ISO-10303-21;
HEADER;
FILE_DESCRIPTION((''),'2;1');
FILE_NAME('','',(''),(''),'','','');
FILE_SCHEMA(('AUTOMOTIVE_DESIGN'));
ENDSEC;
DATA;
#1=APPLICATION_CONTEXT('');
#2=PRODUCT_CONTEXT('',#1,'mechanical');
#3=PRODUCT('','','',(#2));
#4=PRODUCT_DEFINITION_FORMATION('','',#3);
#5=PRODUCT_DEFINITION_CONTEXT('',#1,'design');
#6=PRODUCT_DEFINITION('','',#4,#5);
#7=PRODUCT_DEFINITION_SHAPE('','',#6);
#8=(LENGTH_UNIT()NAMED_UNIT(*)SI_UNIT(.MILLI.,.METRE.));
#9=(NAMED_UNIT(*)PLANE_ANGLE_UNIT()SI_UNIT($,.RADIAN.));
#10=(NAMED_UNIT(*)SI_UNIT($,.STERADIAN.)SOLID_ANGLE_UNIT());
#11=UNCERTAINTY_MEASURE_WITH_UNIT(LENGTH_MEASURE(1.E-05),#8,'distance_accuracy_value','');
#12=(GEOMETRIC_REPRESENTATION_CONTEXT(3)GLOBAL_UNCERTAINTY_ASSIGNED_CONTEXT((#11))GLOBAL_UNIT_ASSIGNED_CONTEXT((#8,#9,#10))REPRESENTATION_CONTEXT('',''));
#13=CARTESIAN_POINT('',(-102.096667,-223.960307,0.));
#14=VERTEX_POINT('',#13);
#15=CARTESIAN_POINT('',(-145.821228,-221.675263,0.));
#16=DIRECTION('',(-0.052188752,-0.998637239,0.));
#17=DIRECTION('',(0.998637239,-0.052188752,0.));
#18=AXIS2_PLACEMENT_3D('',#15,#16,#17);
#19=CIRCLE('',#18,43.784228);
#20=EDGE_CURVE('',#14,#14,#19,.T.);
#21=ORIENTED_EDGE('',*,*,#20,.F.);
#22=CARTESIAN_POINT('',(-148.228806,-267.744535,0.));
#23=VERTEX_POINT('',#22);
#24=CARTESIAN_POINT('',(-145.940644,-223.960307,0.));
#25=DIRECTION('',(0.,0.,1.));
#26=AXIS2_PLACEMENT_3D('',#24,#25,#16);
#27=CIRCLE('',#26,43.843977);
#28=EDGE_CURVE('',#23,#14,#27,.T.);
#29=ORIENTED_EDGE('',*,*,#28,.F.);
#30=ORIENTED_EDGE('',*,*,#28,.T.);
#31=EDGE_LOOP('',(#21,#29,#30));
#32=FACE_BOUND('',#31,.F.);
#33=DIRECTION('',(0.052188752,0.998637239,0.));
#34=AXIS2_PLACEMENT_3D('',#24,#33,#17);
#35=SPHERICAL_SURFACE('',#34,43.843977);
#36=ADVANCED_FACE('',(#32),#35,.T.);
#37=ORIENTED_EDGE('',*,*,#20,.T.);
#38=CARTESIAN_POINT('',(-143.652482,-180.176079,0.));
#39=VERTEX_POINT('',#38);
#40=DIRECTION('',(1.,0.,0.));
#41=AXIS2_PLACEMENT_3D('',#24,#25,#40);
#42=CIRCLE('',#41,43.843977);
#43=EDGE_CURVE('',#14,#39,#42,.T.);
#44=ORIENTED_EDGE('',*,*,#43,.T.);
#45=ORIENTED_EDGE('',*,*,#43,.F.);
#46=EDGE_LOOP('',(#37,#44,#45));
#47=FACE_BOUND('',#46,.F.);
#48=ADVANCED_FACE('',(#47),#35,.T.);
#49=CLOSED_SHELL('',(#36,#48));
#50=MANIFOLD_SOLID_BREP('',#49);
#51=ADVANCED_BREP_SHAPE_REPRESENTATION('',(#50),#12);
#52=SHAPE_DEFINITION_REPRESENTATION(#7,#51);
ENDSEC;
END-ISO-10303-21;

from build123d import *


with BuildPart() as f1:
    # F0 (on Top) → F1 (revolve)
    with BuildSketch(Plane.XY):
        with BuildLine():
            ThreePointArc((-102.0966668396, -223.9603070818), (-114.1395711049, -193.7777608649), (-143.6524815711, -180.1760787965))
            Line((-143.6524815711, -180.1760787965), (-148.2288064434, -267.7445353672))
            ThreePointArc((-148.2288064434, -267.7445353672), (-115.7580977903, -255.7613799842), (-102.0966668396, -223.9603070818))
        make_face()
    revolve(axis=Axis((-146.900691092, -242.3309087753, 0), (-0.0521887517, -0.9986372385, 0)))


solid = f1.part
